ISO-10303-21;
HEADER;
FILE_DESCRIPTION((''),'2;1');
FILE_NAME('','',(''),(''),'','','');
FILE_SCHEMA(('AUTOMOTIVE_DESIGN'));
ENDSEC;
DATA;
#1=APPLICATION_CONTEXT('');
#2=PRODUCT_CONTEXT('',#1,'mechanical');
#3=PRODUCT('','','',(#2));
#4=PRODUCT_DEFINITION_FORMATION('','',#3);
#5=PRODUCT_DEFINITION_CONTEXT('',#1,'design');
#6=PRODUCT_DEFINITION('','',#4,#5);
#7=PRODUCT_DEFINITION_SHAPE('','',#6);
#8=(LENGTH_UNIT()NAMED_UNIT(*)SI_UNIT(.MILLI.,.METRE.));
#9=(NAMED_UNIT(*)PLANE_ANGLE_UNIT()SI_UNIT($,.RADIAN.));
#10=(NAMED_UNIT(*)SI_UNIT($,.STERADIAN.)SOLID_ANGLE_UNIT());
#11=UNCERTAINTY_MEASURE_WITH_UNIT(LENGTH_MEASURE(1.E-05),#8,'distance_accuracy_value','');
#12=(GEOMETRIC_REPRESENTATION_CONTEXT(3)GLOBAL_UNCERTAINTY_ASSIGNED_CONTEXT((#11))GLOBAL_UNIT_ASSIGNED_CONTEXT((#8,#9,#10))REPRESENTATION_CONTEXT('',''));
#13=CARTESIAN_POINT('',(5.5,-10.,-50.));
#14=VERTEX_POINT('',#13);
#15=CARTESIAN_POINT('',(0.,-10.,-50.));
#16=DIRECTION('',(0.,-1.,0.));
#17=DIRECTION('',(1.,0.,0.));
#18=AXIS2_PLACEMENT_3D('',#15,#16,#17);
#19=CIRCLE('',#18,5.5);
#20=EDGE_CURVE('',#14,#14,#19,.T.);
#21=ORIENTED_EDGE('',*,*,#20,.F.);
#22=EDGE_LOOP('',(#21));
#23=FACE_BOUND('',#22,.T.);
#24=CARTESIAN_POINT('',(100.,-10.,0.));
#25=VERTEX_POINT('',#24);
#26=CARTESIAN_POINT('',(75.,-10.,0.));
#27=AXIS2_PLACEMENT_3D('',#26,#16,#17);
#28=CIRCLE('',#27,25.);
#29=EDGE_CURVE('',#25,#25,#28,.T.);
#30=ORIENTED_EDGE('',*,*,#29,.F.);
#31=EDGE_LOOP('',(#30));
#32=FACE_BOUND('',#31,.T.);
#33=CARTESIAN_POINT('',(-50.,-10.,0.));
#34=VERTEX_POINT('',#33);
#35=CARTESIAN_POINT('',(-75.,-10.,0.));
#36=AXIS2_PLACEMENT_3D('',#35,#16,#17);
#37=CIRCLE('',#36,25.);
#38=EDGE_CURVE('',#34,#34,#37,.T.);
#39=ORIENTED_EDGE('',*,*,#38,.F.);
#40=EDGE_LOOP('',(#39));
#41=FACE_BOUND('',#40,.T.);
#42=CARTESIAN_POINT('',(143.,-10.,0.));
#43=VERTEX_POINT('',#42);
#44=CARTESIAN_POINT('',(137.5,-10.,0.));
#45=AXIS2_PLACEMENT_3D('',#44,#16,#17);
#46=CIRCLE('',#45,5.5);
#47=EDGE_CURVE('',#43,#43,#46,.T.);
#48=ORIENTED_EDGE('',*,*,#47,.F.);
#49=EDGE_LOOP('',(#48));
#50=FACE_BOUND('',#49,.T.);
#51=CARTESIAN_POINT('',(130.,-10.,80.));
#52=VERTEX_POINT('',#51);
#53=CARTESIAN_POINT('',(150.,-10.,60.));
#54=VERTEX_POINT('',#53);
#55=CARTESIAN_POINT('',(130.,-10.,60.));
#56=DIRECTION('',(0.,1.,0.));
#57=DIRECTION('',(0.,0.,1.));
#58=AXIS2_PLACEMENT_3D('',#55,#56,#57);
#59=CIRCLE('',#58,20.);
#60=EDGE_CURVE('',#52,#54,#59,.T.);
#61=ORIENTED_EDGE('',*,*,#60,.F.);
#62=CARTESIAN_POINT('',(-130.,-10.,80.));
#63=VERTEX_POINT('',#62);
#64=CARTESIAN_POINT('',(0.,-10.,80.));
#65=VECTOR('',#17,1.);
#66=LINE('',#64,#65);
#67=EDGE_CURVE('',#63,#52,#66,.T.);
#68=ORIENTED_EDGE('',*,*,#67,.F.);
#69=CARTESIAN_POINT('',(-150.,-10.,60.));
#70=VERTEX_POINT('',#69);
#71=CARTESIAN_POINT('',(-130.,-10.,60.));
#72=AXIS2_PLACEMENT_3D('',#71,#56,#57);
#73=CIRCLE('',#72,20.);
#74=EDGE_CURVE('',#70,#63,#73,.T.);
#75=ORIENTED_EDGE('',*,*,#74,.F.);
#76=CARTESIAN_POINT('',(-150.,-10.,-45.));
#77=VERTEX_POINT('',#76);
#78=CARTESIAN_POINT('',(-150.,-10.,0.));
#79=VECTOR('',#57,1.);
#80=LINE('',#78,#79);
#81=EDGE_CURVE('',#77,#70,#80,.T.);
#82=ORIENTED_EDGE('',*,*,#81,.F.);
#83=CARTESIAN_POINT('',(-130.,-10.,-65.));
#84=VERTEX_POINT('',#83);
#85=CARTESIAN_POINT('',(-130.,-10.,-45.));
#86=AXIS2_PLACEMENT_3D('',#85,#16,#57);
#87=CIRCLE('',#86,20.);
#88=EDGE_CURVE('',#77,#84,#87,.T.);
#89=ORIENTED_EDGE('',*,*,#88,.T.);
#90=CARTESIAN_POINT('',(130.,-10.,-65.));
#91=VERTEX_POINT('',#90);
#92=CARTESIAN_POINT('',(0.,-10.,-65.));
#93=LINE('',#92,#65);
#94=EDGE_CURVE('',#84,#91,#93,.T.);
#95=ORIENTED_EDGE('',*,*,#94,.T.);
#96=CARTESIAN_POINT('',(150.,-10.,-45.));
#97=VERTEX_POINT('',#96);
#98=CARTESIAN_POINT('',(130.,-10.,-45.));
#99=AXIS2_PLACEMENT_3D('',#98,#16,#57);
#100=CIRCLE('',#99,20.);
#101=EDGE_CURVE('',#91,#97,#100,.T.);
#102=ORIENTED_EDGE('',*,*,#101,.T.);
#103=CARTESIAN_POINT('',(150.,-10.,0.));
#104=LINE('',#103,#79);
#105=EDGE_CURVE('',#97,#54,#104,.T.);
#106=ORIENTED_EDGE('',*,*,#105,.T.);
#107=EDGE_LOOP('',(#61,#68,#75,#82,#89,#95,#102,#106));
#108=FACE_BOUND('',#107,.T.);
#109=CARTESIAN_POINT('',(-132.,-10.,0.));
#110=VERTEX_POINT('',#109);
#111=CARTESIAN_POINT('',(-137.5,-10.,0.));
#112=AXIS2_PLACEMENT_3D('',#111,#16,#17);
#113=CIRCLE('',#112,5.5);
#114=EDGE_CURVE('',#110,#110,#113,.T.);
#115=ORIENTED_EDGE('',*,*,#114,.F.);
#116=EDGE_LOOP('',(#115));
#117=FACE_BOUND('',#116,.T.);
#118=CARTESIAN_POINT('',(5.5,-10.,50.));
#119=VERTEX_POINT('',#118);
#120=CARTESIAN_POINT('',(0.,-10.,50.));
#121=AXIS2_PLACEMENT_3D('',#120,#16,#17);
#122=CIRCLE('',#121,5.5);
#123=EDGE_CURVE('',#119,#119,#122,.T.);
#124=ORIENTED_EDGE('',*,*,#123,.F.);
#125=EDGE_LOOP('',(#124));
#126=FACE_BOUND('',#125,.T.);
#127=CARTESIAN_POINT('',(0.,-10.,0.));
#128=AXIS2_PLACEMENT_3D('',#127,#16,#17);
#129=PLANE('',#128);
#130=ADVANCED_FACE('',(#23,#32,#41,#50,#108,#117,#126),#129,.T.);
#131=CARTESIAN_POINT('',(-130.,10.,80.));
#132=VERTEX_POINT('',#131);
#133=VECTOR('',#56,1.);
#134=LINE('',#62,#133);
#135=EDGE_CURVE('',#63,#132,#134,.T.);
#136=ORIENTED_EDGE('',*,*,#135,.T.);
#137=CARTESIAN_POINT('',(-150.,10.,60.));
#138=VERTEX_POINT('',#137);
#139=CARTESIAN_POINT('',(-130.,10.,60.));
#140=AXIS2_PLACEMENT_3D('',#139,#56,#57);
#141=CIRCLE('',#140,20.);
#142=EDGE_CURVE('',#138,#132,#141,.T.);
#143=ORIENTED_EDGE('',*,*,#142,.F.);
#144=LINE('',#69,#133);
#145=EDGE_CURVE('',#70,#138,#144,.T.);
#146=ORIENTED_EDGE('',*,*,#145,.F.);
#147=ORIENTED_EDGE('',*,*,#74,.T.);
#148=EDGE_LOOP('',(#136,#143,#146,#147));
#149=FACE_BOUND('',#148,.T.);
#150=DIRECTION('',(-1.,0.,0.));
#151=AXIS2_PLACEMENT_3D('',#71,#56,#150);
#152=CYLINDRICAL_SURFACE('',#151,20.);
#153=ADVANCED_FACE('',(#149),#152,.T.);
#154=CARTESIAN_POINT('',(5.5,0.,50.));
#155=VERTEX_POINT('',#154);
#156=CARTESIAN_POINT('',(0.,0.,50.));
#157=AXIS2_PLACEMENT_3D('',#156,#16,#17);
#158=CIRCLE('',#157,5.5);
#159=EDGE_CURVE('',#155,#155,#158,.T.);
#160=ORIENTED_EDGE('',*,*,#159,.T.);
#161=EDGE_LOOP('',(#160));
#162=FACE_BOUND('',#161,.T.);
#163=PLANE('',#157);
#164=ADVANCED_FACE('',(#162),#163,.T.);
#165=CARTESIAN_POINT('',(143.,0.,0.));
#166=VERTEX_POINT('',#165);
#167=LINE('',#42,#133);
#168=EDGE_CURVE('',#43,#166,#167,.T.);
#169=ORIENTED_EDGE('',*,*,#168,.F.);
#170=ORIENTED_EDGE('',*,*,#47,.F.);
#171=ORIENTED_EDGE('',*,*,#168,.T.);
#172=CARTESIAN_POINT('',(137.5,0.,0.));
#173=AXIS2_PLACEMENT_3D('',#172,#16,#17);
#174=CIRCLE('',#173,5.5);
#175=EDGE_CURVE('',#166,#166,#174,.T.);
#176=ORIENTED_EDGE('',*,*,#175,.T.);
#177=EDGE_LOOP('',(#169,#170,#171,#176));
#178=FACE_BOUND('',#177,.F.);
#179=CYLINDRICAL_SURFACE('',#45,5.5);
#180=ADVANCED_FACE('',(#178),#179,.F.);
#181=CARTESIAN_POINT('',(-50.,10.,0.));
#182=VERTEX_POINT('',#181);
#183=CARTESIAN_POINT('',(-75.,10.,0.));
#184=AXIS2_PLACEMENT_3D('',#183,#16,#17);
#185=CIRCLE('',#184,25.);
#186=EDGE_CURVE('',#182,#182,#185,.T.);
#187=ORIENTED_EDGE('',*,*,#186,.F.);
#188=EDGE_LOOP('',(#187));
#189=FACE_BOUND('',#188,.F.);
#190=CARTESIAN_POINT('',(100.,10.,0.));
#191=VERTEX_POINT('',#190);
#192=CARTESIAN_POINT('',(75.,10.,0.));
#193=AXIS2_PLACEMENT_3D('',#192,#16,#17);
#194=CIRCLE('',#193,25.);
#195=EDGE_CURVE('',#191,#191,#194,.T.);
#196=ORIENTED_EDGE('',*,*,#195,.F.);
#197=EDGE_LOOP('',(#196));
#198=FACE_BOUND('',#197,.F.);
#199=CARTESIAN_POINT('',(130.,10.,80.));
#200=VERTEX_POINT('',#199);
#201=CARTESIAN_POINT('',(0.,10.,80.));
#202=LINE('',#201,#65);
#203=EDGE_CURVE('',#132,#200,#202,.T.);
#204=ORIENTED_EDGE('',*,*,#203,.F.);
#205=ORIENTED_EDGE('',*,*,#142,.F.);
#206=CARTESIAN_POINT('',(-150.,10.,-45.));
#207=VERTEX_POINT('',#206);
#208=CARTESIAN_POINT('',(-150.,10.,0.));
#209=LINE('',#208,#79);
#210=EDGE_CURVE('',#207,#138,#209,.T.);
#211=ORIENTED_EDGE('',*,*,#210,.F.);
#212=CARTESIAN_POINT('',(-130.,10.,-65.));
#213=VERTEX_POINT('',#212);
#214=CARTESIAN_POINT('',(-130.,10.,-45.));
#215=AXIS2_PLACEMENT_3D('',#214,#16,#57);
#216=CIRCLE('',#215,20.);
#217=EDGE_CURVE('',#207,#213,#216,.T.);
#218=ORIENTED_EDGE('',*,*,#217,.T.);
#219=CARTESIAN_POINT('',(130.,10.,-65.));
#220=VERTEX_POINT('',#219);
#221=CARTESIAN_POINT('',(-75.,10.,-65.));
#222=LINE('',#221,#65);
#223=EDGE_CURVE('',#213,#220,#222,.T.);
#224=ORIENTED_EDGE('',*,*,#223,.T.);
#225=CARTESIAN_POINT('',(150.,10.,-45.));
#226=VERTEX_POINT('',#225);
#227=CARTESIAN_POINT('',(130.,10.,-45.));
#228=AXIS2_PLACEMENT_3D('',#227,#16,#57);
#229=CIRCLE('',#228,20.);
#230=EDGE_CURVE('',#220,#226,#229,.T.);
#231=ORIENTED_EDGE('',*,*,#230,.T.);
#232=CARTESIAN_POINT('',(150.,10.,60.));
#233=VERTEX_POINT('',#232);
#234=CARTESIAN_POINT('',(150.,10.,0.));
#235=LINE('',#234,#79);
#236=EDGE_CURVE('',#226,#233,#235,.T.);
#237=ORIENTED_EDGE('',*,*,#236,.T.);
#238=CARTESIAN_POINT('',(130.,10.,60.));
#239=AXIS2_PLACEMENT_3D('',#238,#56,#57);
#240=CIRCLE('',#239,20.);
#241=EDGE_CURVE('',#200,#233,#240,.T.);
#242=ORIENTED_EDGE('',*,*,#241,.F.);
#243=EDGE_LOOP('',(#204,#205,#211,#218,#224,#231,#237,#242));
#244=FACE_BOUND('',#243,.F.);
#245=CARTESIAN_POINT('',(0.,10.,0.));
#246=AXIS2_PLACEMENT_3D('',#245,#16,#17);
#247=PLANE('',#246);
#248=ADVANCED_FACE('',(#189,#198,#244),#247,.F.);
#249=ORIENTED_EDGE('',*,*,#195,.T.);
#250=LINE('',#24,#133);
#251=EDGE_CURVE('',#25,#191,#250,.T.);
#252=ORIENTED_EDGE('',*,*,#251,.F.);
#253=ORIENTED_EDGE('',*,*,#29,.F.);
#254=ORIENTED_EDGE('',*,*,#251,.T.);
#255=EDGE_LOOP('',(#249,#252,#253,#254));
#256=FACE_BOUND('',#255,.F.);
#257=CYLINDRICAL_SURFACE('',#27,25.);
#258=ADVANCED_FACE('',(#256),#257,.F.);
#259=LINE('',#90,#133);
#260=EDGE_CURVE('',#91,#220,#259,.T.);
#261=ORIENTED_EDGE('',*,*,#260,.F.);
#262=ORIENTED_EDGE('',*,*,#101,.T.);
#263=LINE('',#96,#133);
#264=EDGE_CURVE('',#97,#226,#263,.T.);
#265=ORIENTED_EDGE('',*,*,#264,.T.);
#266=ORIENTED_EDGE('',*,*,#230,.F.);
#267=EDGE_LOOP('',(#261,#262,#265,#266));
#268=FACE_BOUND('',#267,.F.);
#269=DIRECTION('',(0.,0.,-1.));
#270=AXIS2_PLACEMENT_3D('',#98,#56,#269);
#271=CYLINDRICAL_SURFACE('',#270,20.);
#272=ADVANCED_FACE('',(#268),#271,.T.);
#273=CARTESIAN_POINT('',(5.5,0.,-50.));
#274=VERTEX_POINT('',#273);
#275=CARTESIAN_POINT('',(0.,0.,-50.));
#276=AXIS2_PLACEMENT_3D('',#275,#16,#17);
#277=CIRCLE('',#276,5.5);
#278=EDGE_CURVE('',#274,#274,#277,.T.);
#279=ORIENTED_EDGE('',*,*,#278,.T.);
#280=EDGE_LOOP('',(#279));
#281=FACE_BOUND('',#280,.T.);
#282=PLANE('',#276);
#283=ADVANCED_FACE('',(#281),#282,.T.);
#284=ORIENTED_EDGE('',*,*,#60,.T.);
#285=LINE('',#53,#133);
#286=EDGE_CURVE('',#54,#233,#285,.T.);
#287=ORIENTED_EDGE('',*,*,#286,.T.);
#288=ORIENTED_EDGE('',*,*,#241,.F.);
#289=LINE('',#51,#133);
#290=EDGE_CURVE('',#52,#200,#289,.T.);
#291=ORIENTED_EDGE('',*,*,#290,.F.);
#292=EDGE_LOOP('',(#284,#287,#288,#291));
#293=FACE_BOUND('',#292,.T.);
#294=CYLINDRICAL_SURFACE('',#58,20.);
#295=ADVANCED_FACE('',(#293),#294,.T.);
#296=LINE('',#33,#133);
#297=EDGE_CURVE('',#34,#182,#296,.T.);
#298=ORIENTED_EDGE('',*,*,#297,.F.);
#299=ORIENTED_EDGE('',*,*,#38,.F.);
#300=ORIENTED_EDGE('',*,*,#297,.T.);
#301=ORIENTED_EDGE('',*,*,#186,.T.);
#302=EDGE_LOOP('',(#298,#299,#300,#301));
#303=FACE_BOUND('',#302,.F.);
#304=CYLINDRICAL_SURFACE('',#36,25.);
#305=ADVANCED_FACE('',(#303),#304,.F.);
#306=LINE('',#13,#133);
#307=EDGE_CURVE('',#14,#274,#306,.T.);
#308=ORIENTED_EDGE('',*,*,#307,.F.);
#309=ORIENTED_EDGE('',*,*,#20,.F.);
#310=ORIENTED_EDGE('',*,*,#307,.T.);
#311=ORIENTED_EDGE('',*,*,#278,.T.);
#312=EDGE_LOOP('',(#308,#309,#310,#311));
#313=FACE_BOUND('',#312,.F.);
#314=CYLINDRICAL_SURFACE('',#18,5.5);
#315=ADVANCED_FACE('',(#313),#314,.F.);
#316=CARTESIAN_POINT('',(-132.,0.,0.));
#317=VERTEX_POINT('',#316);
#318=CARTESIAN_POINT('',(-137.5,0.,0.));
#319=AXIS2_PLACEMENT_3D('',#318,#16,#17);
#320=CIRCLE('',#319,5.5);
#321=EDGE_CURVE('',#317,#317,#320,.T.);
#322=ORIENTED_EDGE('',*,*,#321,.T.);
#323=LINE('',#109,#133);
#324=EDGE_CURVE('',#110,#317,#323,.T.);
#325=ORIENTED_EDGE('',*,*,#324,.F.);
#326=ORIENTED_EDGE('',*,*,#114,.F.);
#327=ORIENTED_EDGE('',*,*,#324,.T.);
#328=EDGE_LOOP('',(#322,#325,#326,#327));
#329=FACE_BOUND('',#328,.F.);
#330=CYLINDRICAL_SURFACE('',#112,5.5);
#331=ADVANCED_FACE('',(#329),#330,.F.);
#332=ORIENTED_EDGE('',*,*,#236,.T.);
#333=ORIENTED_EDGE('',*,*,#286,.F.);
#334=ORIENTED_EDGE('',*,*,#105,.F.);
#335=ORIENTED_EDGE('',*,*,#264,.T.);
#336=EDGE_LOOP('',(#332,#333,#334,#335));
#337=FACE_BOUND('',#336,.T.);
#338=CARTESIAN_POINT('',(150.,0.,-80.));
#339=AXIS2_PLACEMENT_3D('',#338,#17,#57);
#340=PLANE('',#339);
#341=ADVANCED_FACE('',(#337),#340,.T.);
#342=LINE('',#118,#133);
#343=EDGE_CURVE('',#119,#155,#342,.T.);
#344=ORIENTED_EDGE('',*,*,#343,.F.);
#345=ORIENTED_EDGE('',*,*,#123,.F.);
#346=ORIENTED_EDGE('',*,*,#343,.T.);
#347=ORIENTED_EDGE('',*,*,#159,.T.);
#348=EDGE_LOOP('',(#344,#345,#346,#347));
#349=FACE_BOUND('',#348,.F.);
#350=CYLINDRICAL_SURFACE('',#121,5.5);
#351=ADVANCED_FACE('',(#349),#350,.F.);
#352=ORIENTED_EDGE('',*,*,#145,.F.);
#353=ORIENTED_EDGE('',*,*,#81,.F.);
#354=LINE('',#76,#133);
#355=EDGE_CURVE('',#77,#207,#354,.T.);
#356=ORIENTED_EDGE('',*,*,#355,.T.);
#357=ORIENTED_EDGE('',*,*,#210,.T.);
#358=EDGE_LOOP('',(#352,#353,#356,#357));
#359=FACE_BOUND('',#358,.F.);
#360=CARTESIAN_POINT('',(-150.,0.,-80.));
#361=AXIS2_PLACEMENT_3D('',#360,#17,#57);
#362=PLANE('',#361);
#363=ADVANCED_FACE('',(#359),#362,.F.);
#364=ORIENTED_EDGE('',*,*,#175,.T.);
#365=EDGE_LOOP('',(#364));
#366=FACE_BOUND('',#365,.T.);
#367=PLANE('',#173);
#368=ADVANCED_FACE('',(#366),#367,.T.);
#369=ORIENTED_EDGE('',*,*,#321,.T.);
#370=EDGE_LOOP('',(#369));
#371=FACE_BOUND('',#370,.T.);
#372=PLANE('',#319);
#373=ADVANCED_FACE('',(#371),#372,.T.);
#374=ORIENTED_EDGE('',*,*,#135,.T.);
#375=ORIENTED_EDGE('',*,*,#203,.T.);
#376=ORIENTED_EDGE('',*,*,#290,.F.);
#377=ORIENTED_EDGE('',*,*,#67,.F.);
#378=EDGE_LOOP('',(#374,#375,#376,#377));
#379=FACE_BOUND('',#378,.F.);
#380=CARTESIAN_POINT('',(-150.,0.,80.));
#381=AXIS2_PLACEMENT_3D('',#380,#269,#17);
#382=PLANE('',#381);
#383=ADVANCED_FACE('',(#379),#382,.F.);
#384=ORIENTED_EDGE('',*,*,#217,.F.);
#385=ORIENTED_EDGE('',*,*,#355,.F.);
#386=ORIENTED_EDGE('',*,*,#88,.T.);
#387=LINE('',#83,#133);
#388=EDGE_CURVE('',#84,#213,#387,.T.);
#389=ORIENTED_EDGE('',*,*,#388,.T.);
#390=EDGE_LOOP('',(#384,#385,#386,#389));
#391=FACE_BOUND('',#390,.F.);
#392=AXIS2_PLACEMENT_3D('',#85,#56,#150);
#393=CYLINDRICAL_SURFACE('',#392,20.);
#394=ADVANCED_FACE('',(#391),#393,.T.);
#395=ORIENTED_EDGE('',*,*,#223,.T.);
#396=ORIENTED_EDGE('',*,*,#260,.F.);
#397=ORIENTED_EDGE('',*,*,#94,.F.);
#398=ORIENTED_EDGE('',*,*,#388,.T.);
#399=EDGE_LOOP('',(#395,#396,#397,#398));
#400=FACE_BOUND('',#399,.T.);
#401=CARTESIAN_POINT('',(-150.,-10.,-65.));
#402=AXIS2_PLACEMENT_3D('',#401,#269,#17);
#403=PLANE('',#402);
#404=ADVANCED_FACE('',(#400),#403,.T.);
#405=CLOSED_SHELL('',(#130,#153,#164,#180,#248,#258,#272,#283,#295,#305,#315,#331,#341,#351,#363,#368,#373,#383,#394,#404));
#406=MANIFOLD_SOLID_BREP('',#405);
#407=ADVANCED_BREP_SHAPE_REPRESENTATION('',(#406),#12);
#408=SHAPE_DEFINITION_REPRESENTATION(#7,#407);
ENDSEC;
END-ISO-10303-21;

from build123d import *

# Parameters (mm, degrees)
F0_W     = 300
F0_H     = 160
F1_DEPTH = 10
F2_R     = 25
F3_DEPTH = 20.001
F4_R     = 5.5
F5_DEPTH = 10
F6_W     = 300
F6_H     = 15
F7_DEPTH = 20.001
F8_R     = 20


with BuildPart() as f1:
    # F0 (on Front) → F1 (new body, symmetric)
    with BuildSketch(Plane.XZ):
        Rectangle(F0_W, F0_H)
    extrude(amount=F1_DEPTH, both=True)

    # F2 (on face) → F3 (cut, through all)
    with BuildSketch(Plane.XZ.offset(10)):
        with Locations((-75, 0)):
            Circle(F2_R)
        with Locations((75, 0)):
            Circle(F2_R)
    extrude(amount=-F3_DEPTH, mode=Mode.SUBTRACT)

    # F4 (on face) → F5 (cut)
    with BuildSketch(Plane.XZ.offset(10)):
        with Locations((-137.5, 0)):
            Circle(F4_R)
        with Locations((0, 50)):
            Circle(F4_R)
        with Locations((137.5, 0)):
            Circle(F4_R)
        with Locations((0, -50)):
            Circle(F4_R)
    extrude(amount=-F5_DEPTH, mode=Mode.SUBTRACT)

    # F6 (on face) → F7 (cut, through all)
    with BuildSketch(Plane.XZ.offset(10)):
        with Locations((0, -72.5)):
            Rectangle(F6_W, F6_H)
    extrude(amount=-F7_DEPTH, mode=Mode.SUBTRACT)

    # F8
    f8_edges = [f1.edges().sort_by_distance(p)[0] for p in [
        (-150, 0, 80),
        (150, 0, 80),
        (-150, 0, -65),
        (150, 0, -65),
    ]]
    fillet(f8_edges, radius=F8_R)


solid = f1.part
